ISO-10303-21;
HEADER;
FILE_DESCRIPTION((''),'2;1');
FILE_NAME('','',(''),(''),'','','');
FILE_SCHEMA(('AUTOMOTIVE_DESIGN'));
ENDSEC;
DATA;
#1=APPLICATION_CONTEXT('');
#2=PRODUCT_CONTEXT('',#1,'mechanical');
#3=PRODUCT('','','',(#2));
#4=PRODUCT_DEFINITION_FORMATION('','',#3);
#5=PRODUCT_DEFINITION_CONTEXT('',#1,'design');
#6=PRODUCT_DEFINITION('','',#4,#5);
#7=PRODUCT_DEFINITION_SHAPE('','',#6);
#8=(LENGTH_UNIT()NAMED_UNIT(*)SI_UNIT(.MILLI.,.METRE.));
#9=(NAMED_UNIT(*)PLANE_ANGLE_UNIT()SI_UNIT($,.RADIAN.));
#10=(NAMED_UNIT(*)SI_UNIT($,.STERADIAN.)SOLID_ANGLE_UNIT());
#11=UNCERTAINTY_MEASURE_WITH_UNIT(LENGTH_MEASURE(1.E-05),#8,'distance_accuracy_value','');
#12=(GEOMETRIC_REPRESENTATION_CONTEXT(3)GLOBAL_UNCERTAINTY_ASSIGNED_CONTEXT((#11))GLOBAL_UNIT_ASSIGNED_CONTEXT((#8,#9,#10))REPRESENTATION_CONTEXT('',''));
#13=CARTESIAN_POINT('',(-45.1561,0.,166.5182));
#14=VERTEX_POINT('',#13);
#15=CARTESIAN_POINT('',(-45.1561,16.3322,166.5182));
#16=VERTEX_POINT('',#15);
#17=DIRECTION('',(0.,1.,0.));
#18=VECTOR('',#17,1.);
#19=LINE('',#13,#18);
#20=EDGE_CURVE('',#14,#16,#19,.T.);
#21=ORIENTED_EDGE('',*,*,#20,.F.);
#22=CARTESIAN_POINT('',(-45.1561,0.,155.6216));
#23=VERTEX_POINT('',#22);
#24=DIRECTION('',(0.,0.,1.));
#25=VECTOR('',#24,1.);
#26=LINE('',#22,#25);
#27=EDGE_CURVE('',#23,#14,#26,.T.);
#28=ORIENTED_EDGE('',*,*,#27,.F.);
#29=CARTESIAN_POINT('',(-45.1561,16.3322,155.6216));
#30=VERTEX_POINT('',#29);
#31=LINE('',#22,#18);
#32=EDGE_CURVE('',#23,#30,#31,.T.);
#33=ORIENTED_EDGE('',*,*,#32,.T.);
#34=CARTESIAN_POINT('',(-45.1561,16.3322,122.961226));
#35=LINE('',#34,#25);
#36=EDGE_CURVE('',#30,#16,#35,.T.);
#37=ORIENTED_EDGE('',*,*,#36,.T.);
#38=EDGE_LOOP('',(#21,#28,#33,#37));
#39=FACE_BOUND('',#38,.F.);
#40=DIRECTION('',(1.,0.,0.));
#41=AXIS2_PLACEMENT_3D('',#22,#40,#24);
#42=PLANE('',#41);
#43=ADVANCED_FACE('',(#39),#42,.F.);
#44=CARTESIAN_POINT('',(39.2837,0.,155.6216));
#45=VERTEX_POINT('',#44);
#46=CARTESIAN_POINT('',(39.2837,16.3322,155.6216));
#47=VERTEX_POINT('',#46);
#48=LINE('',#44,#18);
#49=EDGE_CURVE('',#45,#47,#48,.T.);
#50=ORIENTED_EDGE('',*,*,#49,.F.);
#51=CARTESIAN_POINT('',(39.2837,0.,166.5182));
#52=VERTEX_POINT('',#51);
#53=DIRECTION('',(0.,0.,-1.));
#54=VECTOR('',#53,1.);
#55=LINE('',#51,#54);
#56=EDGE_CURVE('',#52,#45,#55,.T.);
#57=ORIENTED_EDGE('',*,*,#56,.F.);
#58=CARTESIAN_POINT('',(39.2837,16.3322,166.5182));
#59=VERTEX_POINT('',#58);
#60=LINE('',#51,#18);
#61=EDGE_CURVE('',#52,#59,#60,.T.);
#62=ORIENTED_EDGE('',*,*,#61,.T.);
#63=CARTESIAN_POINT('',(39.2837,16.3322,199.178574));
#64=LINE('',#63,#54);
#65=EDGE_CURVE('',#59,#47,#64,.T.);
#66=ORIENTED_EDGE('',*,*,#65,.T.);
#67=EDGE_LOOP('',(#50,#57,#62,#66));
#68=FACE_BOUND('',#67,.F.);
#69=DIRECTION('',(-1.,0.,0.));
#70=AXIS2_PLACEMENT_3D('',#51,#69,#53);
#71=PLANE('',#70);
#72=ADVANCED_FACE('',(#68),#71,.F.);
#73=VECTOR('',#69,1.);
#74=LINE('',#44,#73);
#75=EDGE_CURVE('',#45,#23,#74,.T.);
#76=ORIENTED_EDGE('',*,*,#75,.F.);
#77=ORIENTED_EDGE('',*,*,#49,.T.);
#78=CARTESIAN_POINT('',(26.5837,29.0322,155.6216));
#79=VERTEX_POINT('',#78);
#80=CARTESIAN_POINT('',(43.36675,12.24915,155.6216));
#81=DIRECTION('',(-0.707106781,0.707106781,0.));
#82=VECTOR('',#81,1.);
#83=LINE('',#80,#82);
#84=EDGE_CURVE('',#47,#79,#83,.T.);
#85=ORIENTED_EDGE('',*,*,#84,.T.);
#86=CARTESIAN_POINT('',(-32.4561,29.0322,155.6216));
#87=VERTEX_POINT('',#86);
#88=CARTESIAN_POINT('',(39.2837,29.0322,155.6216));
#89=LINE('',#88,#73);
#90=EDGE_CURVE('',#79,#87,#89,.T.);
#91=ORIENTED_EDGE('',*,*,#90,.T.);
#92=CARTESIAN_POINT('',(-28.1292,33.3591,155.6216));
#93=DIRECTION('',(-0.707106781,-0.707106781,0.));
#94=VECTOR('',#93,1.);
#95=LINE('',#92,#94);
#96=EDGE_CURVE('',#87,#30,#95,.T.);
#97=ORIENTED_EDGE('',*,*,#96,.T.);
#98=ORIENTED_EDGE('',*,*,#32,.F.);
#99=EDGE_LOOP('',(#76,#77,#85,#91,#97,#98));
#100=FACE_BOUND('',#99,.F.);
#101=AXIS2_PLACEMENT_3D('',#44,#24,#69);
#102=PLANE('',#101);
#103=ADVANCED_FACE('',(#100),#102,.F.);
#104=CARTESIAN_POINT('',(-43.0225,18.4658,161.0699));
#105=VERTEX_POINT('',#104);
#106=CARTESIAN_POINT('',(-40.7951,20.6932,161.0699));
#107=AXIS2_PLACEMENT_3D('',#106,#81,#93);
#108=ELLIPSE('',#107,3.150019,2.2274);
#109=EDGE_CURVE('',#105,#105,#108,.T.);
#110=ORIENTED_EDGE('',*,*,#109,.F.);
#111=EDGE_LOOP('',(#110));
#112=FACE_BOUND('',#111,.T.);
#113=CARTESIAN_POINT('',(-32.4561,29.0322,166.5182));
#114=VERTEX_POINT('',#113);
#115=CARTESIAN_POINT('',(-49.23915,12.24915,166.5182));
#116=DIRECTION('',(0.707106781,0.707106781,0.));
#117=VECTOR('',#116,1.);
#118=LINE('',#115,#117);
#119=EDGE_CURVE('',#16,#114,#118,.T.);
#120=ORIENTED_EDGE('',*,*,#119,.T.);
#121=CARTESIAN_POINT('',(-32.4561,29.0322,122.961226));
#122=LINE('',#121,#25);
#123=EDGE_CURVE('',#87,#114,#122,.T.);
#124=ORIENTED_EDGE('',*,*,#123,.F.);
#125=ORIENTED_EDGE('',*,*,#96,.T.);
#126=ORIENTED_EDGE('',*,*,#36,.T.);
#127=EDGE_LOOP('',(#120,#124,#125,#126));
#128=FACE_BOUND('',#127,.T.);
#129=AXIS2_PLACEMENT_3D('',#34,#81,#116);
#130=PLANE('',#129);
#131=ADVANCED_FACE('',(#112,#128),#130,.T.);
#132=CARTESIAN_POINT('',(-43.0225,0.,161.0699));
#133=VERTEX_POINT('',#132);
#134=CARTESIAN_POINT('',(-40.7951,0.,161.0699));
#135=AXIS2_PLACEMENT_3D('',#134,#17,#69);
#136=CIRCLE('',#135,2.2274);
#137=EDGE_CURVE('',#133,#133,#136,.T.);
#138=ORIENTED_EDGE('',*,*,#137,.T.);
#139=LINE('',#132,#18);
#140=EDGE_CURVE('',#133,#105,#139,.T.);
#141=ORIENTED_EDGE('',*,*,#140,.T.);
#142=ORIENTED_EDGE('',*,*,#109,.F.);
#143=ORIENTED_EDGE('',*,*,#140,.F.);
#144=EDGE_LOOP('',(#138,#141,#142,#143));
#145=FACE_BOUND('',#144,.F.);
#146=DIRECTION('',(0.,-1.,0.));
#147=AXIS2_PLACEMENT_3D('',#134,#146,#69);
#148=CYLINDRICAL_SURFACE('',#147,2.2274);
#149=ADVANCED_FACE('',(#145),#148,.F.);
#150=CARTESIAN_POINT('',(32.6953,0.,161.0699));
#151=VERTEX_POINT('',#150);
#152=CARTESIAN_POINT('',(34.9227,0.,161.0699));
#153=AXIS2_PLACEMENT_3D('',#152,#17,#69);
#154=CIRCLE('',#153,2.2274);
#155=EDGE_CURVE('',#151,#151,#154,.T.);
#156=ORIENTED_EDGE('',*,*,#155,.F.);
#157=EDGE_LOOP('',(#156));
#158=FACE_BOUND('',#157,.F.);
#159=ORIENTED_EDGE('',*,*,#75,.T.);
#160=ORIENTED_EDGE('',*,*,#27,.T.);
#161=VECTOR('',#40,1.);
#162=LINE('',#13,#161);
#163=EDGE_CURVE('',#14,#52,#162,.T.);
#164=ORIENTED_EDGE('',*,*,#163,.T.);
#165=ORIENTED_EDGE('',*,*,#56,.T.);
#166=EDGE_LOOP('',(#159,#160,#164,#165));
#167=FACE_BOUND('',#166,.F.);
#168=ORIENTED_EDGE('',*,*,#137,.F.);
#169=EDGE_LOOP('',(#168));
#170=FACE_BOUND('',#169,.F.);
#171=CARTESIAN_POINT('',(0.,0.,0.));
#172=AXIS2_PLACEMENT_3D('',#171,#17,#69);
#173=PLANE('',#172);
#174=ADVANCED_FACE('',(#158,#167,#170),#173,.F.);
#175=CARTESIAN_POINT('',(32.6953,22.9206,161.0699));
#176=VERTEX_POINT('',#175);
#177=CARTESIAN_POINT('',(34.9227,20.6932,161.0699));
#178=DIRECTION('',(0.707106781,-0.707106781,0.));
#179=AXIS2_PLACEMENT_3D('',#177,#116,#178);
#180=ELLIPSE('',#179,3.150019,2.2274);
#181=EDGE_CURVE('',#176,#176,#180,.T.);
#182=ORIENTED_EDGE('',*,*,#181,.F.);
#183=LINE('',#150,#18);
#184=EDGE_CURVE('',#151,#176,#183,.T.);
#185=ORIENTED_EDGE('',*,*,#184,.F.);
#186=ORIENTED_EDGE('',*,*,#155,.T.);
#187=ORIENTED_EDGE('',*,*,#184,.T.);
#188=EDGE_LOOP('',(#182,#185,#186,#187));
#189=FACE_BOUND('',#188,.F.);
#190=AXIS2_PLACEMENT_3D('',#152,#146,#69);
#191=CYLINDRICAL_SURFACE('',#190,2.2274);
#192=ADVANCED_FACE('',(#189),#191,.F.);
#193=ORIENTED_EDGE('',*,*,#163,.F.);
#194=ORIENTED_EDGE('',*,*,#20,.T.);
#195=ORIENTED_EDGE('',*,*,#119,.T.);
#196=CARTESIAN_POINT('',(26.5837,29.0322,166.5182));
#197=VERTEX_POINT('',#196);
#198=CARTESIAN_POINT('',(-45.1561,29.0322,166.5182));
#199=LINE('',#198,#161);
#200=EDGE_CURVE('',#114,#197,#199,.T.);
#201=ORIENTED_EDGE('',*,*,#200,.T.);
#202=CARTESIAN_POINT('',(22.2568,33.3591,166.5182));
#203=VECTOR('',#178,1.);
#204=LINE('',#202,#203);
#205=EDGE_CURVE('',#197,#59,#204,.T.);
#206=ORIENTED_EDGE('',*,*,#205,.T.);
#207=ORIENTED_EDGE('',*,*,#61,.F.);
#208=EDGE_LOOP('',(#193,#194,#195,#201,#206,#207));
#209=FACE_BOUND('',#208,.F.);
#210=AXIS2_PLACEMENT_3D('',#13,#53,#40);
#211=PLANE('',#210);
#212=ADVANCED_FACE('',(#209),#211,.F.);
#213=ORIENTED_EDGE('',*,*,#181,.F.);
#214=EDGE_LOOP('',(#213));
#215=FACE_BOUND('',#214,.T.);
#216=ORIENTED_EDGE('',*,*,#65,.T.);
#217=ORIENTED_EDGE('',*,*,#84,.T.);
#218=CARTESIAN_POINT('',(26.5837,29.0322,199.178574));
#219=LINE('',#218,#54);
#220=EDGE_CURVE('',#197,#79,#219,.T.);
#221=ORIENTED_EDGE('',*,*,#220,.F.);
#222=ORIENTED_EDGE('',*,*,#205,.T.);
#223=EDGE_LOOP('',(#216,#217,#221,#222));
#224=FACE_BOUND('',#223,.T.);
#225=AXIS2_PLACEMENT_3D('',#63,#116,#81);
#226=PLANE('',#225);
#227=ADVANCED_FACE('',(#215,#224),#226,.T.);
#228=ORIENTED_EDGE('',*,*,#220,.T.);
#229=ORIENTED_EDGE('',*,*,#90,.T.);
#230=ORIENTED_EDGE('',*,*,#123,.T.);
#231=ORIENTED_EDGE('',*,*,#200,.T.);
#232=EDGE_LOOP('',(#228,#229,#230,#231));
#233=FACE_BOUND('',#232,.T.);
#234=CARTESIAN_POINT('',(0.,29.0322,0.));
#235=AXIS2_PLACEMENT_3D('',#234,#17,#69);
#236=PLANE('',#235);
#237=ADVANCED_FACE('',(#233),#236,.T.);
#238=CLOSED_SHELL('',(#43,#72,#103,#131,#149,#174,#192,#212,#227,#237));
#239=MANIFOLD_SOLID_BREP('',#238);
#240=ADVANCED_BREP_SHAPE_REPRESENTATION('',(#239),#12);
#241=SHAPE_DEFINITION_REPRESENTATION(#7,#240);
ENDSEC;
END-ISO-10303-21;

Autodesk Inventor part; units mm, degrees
ref_plane "YZ Plane" through (0, 0, 0) normal (1, 0, 0) x (0, 1, 0)
ref_plane "XZ Plane" through (0, 0, 0) normal (0, 1, 0) x (-1, 0, 0)
ref_plane "XY Plane" through (0, 0, 0) normal (0, 0, 1) x (1, 0, 0)
sketch "Sketch1" plane through (0, 0, 0) normal (0, 1, 0) x (-1, 0, 0)
  line L0 (-39.2837, 182.0907) -> (45.1561, 182.0907)
  line L1 (45.1561, 182.0907) -> (45.1561, 192.9873)
  line L2 (-39.2837, 192.9873) -> (-39.2837, 182.0907)
  circle A0 centre (40.7951, 187.539) radius 2.2274
  circle A1 centre (-34.9227, 187.539) radius 2.2274
  line L3 (52.1157, -152.8547) -> (52.1157, 254.4851) construction
  line L4 (-39.2837, 182.0907) -> (45.1561, 182.0907) construction
  line L5 (45.1561, 182.0907) -> (45.1561, 192.9873) construction
  line L6 (45.1561, 192.9873) -> (-39.2837, 192.9873)
  line L7 (-39.2837, 192.9873) -> (-39.2837, 182.0907) construction
  circle A2 centre (40.7951, 187.539) radius 2.2274
  circle A3 centre (-34.9227, 187.539) radius 2.2274
  line L8 (-47.9603, 254.4851) -> (-47.9603, -152.8547) construction
  line L9 (45.1561, 166.5182) -> (-39.2837, 166.5182)
  line L10 (-39.2837, 166.5182) -> (-39.2837, 155.6216)
  line L11 (-39.2837, 155.6216) -> (45.1561, 155.6216)
  line L12 (45.1561, 155.6216) -> (45.1561, 166.5182)
  circle A4 centre (40.7951, 161.0699) radius 2.2274
  circle A5 centre (-34.9227, 161.0699) radius 2.2274
  point P0 (0, 0)
  point P1 (0, 0)
  point P2 (0, 0)
  dimension "d0" = 84.4398
  dimension "d1" = 10.8966
  dimension "d3" = 2.1336
  dimension "d4" = 2.1336
  dimension "d5" = 6.9596
  dimension "d6" = 84.4398
  dimension "d7" = 10.8966
  dimension "d9" = 2.1336
  dimension "d10" = 2.1336
  dimension "d14" = 10.8966
  dimension "d15" = 3.2209
  dimension "d16" = 3.2209
  dimension "d17" = 2.1336
  dimension "d18" = 2.1336
  dimension "d19" = 3.2209
  dimension "d20" = 3.2209
  dimension "d21" = 75.7178
  dimension "d22" = 75.7178
  dimension "d23" = 84.4398
extrude "Extrusion1" add sketch "Sketch1" along normal blind 29.0322 contours L12 L11 L10 L9
chamfer "Chamfer1" distance 12.7 angle 45 2 edges at (39.2837, 29.0322, 161.0699) (-45.1561, 29.0322, 161.0699)
equation "\"d4\" = d3"
equation "\"d10\" = d9"
equation "\"d14\" = d7"
equation "\"d17\" = d9"
equation "\"d18\" = d10"
equation "\"d19\" = d15"
equation "\"d20\" = d16"
properties part number "Voltage Divider (Rough)"
